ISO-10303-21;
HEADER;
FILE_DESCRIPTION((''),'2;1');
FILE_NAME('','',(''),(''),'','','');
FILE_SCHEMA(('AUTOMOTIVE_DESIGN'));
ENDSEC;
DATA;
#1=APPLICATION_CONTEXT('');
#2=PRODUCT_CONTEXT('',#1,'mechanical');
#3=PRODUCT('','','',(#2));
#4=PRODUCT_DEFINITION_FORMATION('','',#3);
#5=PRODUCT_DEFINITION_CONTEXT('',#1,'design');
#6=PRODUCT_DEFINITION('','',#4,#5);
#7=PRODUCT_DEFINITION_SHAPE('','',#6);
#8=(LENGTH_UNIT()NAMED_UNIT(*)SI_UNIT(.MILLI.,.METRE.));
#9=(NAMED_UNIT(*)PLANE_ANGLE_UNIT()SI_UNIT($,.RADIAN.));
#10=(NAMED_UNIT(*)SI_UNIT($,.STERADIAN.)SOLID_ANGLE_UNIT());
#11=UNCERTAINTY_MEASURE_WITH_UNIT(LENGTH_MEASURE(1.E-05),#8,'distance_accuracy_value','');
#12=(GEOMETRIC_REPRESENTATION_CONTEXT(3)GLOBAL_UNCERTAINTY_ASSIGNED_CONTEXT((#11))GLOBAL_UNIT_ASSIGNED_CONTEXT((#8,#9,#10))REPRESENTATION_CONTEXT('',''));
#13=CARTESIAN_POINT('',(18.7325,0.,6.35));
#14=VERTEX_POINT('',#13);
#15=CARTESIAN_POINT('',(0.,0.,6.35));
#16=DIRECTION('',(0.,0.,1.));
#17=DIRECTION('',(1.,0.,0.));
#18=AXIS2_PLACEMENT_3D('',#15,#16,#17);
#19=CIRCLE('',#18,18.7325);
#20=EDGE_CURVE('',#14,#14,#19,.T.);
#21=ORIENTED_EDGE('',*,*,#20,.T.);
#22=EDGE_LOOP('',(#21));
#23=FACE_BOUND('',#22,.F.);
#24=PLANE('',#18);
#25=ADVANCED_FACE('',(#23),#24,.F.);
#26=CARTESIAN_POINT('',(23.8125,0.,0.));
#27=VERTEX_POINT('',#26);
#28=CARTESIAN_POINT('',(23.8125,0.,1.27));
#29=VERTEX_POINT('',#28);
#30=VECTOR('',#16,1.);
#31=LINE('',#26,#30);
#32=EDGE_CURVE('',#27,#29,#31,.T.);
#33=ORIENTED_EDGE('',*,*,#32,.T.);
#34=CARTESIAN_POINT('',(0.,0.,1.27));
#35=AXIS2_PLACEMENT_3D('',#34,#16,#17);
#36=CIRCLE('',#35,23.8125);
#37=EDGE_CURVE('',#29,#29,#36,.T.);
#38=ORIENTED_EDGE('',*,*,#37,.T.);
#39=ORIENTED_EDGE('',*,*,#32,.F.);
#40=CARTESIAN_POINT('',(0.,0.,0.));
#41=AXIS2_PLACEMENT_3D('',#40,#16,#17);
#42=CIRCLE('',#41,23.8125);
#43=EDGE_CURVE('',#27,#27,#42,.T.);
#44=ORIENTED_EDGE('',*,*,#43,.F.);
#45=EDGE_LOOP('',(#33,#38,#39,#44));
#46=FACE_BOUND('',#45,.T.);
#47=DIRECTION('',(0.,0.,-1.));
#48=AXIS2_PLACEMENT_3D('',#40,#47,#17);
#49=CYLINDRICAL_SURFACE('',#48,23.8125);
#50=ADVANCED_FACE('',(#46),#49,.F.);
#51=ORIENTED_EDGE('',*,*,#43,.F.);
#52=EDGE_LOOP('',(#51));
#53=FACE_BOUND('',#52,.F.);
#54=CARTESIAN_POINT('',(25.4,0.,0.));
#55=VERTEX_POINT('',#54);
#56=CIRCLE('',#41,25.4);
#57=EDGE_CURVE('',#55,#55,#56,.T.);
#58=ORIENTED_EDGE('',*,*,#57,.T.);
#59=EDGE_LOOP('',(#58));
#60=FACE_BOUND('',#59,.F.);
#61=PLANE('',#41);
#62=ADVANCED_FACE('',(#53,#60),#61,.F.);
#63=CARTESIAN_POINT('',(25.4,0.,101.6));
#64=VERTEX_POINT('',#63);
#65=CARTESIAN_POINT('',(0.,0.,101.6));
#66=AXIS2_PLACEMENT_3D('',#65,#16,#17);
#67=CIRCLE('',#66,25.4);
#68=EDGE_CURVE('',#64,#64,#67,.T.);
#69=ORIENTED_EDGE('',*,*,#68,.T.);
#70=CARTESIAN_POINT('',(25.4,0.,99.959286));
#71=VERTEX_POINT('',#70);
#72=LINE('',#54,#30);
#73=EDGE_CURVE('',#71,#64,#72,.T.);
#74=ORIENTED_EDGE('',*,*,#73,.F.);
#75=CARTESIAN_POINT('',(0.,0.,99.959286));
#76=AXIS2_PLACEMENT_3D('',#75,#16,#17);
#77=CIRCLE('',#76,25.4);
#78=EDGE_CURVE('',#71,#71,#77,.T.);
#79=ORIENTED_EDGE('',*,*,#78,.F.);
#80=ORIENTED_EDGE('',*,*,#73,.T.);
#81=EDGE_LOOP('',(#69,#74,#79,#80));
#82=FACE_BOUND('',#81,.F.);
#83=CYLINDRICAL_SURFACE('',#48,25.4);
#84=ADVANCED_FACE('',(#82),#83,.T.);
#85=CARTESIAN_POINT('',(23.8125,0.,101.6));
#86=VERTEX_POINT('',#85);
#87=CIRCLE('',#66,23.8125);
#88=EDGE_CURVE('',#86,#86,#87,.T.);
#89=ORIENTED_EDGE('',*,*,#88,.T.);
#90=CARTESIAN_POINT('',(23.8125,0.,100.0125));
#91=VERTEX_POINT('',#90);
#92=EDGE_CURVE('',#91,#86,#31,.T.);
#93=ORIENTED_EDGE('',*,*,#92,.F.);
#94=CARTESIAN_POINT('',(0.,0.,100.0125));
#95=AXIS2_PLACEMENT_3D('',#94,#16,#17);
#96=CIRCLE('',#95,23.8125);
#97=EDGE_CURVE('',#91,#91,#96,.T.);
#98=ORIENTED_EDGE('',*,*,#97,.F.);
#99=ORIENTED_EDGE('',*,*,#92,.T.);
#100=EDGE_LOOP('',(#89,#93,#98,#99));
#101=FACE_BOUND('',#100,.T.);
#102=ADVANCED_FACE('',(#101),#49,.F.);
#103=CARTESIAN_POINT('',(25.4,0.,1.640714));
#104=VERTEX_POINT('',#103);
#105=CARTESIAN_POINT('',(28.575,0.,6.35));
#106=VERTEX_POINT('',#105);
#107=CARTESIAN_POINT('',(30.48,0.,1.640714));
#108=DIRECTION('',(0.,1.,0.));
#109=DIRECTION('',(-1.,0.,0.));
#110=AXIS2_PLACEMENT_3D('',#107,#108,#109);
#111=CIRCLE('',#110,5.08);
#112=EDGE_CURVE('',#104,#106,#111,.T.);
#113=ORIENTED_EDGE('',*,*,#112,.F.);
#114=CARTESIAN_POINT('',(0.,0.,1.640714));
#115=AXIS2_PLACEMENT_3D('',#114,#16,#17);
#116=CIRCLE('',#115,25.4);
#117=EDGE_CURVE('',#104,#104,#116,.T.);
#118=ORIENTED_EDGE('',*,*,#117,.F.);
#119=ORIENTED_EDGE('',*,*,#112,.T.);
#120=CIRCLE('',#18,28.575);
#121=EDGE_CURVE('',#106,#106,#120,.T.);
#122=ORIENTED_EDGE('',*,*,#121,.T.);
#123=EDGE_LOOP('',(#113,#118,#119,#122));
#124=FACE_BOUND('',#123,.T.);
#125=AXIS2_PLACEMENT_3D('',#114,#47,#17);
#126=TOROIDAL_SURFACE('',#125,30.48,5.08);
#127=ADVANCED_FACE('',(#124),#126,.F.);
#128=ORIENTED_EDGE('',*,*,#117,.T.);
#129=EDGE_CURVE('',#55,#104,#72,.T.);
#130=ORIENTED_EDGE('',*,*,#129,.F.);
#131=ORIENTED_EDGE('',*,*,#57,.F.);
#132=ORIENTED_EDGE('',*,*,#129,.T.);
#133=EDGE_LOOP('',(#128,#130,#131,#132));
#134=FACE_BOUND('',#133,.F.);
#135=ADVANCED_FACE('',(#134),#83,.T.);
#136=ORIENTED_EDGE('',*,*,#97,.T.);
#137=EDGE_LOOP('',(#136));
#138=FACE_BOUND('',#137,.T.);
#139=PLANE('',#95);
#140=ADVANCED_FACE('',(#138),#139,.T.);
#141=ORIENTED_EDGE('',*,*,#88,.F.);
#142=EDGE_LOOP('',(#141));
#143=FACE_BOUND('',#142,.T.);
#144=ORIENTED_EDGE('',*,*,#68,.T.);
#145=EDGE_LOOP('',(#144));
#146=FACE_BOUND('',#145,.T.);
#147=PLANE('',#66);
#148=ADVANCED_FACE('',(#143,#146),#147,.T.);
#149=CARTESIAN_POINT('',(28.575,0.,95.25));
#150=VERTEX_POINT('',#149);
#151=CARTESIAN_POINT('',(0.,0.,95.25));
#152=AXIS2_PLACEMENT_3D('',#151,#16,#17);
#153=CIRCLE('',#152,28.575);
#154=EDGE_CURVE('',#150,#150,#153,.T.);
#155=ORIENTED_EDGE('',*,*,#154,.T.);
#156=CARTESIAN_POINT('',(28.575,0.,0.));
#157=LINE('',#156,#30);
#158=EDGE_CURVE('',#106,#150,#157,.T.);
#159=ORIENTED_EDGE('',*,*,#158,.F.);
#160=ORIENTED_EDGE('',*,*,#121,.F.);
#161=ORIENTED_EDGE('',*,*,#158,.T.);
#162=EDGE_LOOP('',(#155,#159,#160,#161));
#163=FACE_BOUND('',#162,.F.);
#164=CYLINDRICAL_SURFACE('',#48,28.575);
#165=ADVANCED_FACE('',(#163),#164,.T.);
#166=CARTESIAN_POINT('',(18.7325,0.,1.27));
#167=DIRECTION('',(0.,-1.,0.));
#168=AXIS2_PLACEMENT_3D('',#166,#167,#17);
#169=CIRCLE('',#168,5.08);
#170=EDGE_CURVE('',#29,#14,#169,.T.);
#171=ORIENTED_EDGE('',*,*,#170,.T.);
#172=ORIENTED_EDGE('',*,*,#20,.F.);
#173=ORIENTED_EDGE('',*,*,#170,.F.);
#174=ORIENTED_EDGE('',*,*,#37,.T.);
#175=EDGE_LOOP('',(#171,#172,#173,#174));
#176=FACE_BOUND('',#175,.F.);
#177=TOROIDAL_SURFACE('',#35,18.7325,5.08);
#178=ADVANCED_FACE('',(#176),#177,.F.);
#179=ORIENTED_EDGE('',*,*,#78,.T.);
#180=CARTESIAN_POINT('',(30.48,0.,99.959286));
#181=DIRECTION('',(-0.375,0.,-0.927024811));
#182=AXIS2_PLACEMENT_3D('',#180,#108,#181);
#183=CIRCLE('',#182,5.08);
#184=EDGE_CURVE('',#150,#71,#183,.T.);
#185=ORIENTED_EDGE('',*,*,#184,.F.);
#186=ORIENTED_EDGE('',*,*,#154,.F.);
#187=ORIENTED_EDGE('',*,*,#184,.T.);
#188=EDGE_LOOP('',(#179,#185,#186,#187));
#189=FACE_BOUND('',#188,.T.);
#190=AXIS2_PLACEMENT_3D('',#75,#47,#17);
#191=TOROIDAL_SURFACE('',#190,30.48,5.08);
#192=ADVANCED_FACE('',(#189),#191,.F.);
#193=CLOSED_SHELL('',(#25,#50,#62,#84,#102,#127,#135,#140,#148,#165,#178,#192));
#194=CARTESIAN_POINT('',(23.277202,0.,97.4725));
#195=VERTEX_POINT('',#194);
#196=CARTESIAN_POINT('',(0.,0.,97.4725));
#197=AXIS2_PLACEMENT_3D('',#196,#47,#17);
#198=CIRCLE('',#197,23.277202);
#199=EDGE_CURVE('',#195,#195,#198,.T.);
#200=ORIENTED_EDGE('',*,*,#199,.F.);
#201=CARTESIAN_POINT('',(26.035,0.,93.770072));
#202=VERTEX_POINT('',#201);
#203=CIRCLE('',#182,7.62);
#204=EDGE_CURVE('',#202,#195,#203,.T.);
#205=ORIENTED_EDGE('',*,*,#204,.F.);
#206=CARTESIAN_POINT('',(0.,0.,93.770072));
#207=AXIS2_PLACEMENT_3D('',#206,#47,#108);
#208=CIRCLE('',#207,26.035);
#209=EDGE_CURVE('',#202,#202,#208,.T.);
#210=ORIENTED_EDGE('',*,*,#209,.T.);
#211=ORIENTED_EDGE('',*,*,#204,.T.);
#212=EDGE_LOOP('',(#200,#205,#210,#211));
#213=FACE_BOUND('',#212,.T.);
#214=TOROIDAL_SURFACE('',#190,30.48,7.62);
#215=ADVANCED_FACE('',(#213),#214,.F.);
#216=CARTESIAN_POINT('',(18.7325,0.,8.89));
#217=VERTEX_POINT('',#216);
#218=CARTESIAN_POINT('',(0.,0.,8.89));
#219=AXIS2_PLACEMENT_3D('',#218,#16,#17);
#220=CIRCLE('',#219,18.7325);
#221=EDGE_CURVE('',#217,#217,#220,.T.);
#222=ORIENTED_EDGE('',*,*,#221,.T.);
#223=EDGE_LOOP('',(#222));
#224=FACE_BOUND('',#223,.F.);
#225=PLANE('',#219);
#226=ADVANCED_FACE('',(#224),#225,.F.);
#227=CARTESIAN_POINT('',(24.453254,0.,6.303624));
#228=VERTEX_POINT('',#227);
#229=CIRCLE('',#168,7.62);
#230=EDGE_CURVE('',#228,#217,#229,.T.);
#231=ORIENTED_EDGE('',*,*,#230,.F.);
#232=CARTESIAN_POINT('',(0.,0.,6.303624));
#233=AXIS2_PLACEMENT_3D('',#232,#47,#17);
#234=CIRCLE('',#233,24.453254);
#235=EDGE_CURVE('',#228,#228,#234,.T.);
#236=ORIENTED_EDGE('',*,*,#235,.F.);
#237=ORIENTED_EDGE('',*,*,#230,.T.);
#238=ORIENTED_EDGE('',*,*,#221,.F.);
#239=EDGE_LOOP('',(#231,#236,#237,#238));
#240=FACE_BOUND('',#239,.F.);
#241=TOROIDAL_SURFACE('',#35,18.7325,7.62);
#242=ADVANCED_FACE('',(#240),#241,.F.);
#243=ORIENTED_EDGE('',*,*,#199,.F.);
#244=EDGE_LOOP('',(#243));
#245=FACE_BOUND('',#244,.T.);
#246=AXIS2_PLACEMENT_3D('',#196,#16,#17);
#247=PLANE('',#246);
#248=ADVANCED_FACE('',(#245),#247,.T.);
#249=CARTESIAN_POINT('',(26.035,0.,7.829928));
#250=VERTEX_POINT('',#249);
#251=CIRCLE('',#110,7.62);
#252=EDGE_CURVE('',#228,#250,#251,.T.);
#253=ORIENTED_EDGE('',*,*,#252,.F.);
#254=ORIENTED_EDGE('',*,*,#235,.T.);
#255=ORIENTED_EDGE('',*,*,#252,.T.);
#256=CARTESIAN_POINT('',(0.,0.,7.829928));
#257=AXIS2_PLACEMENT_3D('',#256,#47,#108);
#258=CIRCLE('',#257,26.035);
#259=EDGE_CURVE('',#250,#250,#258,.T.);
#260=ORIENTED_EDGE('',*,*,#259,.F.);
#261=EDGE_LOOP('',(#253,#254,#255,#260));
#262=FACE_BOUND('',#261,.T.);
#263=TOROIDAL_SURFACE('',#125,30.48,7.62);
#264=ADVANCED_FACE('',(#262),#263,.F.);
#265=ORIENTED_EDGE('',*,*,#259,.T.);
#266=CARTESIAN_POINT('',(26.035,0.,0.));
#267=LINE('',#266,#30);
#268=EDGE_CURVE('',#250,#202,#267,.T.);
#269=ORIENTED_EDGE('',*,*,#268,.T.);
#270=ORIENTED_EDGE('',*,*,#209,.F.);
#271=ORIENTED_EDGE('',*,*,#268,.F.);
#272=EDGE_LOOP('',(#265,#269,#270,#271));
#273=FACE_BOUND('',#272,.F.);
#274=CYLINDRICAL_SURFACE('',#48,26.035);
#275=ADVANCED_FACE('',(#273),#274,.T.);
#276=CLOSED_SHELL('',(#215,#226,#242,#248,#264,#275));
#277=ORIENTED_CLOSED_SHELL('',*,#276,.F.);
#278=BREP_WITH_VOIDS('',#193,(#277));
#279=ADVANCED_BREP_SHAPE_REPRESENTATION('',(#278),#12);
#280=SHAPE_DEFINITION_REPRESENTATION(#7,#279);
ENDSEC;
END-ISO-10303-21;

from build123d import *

# Parameters (mm, degrees)
F0_R     = 28.575
F0_R_2   = 25.4
F1_DEPTH = 95.25
F0_R_3   = 23.8125
F2_DEPTH = 101.6
F3_DEPTH = 6.35
F4_DEPTH = 100.0125
F5_DEPTH = 6.35
F6_DEPTH = 6.35
F7_R     = 5.08
F9_T     = -2.54


# Not quite as in the source:
# - a fillet or chamfer that OpenCascade refuses, or shapes differently, is made with other operations: its cross-section is extruded or revolved along the edge and cut away or added


with BuildPart() as f1:
    # F0 (on Top) → F1 (new body)
    with BuildSketch(Plane.XY):
        Circle(F0_R)
        Circle(F0_R_2, mode=Mode.SUBTRACT)
    extrude(amount=F1_DEPTH)

    # F0 (on Top) → F2 (join)
    with BuildSketch(Plane.XY):
        Circle(F0_R_2)
        Circle(F0_R_3, mode=Mode.SUBTRACT)
    extrude(amount=F2_DEPTH)

    # F0 (on Top) → F3 (cut)
    with BuildSketch(Plane.XY):
        Circle(F0_R)
        Circle(F0_R_2, mode=Mode.SUBTRACT)
    extrude(amount=F3_DEPTH, mode=Mode.SUBTRACT)

    # F0 (on Top) → F4 (join)
    with BuildSketch(Plane.XY):
        Circle(F0_R_3)
    extrude(amount=F4_DEPTH)

    # F0 (on Top) → F5 (join)
    with BuildSketch(Plane.XY):
        Circle(F0_R_3)
    extrude(amount=F5_DEPTH)

    # F0 (on Top) → F6 (cut)
    with BuildSketch(Plane.XY):
        Circle(F0_R_3)
    extrude(amount=F6_DEPTH, mode=Mode.SUBTRACT)

    # F7
    f7_edges = [f1.edges().sort_by_distance(p)[0] for p in [
        (-23.8125, 0, 6.35),
    ]]
    fillet(f7_edges, radius=F7_R)

    # F8: fillet of radius 5.08 on 2 edges, made by hand

    # F8_s1 → F8_t2 (revolve)
    with BuildSketch(Plane.XZ):
        with BuildLine():
            ThreePointArc((25.4, 1.6407139607), (26.2678865162, 4.4805202921), (28.575, 6.35))
            Line((28.575, 6.35), (25.4, 6.35))
            Line((25.4, 6.35), (25.4, 1.6407139607))
        make_face()
    revolve(axis=Axis((0, 0, 6.35), (0, 0, 1)))

    # F8_s3 → F8_t4 (revolve)
    with BuildSketch(Plane.XZ):
        with BuildLine():
            ThreePointArc((28.575, 95.25), (26.2678865162, 97.1194797079), (25.4, 99.9592860393))
            Line((25.4, 99.9592860393), (25.4, 95.25))
            Line((25.4, 95.25), (28.575, 95.25))
        make_face()
    revolve(axis=Axis((0, 0, 95.25), (0, 0, 1)))

    # F9 (hollow: no face is removed)
    offset(amount=F9_T, mode=Mode.SUBTRACT)


solid = f1.part
